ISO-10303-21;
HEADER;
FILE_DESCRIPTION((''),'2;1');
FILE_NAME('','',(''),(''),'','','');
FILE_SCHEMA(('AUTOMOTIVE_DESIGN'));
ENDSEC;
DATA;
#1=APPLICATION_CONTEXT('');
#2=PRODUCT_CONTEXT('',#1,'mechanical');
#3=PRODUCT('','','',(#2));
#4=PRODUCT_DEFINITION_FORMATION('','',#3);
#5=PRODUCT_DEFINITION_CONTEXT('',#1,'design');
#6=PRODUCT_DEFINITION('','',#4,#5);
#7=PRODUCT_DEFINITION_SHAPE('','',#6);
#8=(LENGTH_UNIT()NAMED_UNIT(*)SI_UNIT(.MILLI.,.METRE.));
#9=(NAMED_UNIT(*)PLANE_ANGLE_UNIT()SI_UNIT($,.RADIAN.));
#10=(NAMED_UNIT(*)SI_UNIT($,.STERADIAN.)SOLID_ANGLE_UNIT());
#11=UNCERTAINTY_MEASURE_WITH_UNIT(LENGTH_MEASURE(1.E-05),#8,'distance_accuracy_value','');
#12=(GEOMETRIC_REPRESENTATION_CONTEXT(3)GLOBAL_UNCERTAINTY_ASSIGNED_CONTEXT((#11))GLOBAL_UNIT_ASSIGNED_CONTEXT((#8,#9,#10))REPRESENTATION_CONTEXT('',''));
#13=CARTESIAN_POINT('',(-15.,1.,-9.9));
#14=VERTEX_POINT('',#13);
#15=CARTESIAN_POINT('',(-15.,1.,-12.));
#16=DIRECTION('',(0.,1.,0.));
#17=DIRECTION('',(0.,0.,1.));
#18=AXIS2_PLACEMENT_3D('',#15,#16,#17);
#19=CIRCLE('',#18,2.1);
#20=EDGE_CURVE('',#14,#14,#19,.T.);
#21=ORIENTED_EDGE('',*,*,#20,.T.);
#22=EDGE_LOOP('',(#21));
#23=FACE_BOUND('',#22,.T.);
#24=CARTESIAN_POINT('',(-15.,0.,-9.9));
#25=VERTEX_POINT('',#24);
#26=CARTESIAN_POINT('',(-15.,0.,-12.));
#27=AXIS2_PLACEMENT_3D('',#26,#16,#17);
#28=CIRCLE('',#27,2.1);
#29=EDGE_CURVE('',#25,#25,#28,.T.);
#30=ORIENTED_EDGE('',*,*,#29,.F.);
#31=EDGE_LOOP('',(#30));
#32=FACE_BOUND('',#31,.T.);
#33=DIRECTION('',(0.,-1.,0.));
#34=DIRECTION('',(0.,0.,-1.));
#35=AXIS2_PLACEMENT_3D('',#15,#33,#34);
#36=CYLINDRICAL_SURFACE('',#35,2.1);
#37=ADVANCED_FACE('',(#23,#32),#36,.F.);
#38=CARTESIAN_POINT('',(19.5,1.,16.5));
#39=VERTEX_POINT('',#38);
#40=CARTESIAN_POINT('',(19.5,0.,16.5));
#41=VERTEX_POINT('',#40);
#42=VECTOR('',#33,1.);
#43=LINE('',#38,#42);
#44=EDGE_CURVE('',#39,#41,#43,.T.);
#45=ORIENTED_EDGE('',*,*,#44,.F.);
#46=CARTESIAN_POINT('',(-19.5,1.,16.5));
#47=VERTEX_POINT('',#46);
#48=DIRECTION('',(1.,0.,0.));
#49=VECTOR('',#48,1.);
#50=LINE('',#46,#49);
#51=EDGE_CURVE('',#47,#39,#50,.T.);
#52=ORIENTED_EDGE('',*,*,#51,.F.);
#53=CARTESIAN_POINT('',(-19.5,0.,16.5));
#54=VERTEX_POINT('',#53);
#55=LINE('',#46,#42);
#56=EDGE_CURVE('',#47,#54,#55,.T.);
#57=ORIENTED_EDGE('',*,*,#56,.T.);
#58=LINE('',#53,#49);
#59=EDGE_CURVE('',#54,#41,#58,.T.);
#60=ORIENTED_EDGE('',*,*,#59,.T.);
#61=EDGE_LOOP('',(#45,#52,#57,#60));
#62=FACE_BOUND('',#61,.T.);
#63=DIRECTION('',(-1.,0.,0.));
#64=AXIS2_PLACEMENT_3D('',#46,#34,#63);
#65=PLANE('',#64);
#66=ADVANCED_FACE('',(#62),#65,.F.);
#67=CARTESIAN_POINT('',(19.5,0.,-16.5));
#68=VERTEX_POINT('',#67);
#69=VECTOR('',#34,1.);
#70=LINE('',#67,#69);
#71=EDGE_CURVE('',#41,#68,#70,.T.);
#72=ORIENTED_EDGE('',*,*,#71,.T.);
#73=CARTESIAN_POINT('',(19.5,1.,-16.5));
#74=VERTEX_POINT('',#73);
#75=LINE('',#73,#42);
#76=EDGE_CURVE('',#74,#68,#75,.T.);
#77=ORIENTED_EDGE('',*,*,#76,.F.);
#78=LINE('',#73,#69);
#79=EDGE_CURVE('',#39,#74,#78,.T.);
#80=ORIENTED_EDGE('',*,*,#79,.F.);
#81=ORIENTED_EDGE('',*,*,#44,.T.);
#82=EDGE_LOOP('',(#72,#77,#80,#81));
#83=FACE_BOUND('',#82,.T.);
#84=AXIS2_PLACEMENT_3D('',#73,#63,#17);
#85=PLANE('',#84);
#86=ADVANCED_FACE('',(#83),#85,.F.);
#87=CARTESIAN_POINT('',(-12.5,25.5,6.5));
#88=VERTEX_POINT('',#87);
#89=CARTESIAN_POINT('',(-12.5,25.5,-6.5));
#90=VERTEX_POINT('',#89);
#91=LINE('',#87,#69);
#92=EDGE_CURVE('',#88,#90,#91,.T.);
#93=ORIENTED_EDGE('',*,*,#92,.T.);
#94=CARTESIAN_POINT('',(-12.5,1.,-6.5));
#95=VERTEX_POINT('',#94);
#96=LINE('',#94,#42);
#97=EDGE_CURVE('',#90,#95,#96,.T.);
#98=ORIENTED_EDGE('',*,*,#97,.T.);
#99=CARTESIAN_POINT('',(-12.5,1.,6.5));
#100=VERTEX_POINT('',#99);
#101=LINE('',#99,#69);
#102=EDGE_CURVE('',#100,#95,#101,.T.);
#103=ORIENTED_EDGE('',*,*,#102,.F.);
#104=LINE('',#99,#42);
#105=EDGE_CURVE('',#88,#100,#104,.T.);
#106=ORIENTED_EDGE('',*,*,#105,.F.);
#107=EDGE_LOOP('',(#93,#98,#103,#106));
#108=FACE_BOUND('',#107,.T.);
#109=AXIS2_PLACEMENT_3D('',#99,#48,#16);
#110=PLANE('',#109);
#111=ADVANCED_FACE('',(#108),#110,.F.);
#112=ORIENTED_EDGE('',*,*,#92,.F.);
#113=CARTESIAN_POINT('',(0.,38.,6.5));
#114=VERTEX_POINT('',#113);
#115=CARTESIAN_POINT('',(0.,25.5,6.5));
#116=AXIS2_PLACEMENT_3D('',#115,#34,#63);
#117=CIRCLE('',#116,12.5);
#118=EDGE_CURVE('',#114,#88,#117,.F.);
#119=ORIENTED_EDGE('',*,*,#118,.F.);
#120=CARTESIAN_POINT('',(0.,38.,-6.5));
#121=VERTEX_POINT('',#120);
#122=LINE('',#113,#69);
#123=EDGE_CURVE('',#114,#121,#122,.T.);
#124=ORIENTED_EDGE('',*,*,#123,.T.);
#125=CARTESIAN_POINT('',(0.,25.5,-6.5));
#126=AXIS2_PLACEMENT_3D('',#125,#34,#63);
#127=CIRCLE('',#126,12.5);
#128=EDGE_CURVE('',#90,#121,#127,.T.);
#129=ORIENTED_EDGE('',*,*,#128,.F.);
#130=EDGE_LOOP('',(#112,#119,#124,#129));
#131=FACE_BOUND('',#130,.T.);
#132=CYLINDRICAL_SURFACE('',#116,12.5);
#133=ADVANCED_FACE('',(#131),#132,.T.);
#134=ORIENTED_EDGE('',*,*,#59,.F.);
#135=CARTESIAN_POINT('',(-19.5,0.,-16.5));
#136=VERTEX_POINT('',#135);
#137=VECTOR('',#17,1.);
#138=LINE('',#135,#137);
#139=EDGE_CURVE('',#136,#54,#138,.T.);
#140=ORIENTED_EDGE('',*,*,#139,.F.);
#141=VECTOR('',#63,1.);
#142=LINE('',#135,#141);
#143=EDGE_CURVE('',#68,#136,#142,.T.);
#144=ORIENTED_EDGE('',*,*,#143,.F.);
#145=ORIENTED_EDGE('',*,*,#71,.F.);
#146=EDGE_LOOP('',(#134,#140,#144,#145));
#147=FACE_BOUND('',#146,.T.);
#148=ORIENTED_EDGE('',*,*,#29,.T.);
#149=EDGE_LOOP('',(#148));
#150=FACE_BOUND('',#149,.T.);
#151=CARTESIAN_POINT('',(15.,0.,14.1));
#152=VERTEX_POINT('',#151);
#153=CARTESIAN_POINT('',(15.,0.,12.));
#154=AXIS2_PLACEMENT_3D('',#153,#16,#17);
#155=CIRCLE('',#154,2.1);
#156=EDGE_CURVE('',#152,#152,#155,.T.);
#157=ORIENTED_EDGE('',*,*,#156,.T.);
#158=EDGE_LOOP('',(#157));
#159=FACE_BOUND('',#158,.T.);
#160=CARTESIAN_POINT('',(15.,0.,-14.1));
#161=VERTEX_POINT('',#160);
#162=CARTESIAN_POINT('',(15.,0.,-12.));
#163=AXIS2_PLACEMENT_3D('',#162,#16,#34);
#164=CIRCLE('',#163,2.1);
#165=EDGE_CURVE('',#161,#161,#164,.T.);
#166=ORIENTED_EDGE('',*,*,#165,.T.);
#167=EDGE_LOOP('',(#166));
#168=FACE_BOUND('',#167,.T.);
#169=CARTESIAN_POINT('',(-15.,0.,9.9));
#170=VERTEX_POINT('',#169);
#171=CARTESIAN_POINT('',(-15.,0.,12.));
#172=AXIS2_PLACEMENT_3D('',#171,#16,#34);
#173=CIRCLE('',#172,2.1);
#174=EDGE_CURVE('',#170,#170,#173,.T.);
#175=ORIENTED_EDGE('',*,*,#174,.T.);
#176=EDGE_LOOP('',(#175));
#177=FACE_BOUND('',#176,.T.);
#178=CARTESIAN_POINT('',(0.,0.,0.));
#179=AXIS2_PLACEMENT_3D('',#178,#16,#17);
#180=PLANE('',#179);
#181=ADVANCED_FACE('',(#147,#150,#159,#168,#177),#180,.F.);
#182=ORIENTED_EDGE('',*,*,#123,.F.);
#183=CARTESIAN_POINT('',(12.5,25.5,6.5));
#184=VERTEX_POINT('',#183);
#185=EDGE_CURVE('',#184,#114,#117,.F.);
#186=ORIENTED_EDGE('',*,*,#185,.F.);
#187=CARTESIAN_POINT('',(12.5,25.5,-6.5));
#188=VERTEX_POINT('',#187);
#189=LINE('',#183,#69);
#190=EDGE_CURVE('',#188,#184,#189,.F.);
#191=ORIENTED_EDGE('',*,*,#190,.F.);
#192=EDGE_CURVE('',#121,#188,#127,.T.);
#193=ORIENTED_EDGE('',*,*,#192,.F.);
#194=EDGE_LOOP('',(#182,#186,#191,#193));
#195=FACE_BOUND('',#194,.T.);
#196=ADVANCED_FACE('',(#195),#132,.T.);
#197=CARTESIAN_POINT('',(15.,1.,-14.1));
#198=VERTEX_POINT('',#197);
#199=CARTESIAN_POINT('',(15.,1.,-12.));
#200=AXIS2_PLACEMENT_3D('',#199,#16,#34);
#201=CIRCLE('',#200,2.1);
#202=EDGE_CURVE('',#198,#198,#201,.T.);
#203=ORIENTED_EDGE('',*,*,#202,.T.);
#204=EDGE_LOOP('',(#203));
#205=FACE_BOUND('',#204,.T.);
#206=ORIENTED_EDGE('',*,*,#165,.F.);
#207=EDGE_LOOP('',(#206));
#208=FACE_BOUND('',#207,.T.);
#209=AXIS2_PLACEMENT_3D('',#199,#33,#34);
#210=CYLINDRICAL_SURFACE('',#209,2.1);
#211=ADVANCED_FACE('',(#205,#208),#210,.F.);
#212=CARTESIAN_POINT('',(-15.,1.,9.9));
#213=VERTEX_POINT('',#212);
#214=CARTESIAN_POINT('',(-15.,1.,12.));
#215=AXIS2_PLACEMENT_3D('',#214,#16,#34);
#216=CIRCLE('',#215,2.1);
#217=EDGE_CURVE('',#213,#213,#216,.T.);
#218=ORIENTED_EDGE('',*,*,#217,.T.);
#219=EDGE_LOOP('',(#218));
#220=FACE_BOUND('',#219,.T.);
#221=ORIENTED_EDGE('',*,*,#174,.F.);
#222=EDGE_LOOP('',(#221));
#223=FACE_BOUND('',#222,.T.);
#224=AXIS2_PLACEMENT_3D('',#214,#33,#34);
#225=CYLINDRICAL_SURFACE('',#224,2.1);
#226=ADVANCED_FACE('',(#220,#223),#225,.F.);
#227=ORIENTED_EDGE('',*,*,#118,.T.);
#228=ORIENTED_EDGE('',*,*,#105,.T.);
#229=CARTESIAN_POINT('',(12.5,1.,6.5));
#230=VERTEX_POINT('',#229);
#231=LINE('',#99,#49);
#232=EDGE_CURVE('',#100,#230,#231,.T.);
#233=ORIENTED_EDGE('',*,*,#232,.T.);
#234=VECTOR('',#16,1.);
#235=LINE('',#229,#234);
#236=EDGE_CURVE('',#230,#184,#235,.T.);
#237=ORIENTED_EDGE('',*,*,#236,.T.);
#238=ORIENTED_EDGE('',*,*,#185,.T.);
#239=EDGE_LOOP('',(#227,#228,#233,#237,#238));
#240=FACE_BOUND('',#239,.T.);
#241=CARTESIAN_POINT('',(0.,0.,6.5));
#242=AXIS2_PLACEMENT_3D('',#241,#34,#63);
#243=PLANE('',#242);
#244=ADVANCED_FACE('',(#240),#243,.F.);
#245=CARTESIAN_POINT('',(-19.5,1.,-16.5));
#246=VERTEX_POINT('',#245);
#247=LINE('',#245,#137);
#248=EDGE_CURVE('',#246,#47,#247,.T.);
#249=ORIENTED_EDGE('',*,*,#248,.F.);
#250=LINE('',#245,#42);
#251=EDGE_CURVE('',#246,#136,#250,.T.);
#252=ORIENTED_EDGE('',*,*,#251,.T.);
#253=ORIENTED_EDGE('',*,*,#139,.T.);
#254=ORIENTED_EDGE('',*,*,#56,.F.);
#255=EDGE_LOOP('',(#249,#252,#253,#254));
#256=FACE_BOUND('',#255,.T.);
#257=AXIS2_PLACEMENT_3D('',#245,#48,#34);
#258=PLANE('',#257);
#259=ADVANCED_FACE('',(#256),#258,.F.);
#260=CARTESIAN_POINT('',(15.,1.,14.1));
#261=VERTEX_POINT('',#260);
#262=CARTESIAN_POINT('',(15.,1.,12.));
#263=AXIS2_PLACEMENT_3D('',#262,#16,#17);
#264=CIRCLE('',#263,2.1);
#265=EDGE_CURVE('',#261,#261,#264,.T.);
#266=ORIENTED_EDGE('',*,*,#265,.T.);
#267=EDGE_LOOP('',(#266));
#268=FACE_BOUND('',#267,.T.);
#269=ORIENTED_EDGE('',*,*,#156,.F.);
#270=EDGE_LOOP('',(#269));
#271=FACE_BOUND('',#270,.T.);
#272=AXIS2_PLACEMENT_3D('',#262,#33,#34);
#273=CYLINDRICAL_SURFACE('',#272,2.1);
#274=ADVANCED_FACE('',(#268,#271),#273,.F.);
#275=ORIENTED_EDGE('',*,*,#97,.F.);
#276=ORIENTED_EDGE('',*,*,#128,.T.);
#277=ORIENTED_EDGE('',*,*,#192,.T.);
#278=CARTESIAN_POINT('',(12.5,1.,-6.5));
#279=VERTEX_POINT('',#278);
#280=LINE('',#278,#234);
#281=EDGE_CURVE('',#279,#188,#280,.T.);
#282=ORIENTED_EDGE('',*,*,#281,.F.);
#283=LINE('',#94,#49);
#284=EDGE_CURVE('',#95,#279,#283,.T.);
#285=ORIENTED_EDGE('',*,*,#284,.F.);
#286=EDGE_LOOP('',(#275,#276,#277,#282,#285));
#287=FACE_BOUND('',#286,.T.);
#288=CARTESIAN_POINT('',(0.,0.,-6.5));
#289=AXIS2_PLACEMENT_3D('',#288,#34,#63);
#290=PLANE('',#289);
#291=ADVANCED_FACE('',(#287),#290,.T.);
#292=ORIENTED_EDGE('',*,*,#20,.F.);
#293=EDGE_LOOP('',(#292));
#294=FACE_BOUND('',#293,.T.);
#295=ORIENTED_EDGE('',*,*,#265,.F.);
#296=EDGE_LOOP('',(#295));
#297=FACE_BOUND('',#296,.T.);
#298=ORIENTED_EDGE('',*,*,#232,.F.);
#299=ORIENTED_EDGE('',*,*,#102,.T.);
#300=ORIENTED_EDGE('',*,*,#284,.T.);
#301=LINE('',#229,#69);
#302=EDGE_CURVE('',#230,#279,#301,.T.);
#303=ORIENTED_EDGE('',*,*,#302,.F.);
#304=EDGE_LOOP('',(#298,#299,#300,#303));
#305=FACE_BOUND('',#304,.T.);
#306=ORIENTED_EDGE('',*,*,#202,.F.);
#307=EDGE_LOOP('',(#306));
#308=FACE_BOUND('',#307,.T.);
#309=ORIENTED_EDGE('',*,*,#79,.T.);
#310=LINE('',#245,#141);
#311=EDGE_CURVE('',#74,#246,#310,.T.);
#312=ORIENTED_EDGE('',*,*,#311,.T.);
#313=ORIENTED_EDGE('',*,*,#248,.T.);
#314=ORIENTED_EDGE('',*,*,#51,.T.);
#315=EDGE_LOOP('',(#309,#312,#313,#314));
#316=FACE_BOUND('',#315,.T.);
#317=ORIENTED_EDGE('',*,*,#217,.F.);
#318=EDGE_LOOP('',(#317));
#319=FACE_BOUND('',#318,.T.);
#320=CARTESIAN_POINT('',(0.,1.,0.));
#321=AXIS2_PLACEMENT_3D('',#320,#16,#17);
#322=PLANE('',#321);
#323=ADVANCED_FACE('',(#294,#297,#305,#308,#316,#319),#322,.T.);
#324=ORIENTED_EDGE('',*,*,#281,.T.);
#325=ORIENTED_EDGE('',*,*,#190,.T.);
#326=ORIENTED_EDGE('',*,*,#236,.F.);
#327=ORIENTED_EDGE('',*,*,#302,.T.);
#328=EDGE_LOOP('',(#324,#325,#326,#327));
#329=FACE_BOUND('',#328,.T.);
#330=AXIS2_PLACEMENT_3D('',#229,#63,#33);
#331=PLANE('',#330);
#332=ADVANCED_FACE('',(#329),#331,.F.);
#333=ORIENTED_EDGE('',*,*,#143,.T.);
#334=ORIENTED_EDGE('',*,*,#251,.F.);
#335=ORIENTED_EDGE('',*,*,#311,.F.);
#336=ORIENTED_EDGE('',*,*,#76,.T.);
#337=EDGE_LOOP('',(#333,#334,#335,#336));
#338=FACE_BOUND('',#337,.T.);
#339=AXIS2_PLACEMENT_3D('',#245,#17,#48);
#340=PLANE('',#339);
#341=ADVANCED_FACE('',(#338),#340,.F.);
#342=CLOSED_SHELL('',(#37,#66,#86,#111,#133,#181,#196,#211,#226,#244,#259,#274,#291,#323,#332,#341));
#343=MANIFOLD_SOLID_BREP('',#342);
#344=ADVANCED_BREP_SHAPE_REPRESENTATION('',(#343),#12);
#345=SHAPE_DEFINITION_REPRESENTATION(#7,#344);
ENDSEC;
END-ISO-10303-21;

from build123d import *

# Parameters (mm, degrees)
SKETCH_1_W      = 39
SKETCH_1_H      = 33
SKETCH_1_R      = 2.1
EXTRUDE_1_DEPTH = 1
SKETCH_2_W      = 25
SKETCH_2_H      = 37
EXTRUDE_2_DEPTH = 6.5
FILLET_1_R      = 12.5


with BuildPart() as part:
    # 草图1 → 凸台-拉伸1 (new body)
    with BuildSketch(Plane(origin=(0, 0, 0), x_dir=(1, 0, 0), z_dir=(0, 1, 0))):
        Rectangle(SKETCH_1_W, SKETCH_1_H)
        with Locations(Location((-15, 12, 0), (0, 0, 270))):
            Circle(SKETCH_1_R, mode=Mode.SUBTRACT)
        with Locations(Location((15, 12, 0), (0, 0, 90))):
            Circle(SKETCH_1_R, mode=Mode.SUBTRACT)
        with Locations(Location((15, -12, 0), (0, 0, 270))):
            Circle(SKETCH_1_R, mode=Mode.SUBTRACT)
        with Locations(Location((-15, -12, 0), (0, 0, 90))):
            Circle(SKETCH_1_R, mode=Mode.SUBTRACT)
    extrude(amount=EXTRUDE_1_DEPTH)

    # 草图2 → 凸台-拉伸2 (add, symmetric)
    with BuildSketch(Plane.XY):
        with Locations((0, 19.5)):
            Rectangle(SKETCH_2_W, SKETCH_2_H)
    extrude(amount=EXTRUDE_2_DEPTH, both=True)

    # 圆角1
    fillet_1_edges = [part.edges().sort_by_distance(p)[0] for p in [
        (-12.5, 38, 0),
        (12.5, 38, 0),
    ]]
    fillet(fillet_1_edges, radius=FILLET_1_R - 0.0001)  # a hair under: the kernel refuses the full size


solid = part.part
